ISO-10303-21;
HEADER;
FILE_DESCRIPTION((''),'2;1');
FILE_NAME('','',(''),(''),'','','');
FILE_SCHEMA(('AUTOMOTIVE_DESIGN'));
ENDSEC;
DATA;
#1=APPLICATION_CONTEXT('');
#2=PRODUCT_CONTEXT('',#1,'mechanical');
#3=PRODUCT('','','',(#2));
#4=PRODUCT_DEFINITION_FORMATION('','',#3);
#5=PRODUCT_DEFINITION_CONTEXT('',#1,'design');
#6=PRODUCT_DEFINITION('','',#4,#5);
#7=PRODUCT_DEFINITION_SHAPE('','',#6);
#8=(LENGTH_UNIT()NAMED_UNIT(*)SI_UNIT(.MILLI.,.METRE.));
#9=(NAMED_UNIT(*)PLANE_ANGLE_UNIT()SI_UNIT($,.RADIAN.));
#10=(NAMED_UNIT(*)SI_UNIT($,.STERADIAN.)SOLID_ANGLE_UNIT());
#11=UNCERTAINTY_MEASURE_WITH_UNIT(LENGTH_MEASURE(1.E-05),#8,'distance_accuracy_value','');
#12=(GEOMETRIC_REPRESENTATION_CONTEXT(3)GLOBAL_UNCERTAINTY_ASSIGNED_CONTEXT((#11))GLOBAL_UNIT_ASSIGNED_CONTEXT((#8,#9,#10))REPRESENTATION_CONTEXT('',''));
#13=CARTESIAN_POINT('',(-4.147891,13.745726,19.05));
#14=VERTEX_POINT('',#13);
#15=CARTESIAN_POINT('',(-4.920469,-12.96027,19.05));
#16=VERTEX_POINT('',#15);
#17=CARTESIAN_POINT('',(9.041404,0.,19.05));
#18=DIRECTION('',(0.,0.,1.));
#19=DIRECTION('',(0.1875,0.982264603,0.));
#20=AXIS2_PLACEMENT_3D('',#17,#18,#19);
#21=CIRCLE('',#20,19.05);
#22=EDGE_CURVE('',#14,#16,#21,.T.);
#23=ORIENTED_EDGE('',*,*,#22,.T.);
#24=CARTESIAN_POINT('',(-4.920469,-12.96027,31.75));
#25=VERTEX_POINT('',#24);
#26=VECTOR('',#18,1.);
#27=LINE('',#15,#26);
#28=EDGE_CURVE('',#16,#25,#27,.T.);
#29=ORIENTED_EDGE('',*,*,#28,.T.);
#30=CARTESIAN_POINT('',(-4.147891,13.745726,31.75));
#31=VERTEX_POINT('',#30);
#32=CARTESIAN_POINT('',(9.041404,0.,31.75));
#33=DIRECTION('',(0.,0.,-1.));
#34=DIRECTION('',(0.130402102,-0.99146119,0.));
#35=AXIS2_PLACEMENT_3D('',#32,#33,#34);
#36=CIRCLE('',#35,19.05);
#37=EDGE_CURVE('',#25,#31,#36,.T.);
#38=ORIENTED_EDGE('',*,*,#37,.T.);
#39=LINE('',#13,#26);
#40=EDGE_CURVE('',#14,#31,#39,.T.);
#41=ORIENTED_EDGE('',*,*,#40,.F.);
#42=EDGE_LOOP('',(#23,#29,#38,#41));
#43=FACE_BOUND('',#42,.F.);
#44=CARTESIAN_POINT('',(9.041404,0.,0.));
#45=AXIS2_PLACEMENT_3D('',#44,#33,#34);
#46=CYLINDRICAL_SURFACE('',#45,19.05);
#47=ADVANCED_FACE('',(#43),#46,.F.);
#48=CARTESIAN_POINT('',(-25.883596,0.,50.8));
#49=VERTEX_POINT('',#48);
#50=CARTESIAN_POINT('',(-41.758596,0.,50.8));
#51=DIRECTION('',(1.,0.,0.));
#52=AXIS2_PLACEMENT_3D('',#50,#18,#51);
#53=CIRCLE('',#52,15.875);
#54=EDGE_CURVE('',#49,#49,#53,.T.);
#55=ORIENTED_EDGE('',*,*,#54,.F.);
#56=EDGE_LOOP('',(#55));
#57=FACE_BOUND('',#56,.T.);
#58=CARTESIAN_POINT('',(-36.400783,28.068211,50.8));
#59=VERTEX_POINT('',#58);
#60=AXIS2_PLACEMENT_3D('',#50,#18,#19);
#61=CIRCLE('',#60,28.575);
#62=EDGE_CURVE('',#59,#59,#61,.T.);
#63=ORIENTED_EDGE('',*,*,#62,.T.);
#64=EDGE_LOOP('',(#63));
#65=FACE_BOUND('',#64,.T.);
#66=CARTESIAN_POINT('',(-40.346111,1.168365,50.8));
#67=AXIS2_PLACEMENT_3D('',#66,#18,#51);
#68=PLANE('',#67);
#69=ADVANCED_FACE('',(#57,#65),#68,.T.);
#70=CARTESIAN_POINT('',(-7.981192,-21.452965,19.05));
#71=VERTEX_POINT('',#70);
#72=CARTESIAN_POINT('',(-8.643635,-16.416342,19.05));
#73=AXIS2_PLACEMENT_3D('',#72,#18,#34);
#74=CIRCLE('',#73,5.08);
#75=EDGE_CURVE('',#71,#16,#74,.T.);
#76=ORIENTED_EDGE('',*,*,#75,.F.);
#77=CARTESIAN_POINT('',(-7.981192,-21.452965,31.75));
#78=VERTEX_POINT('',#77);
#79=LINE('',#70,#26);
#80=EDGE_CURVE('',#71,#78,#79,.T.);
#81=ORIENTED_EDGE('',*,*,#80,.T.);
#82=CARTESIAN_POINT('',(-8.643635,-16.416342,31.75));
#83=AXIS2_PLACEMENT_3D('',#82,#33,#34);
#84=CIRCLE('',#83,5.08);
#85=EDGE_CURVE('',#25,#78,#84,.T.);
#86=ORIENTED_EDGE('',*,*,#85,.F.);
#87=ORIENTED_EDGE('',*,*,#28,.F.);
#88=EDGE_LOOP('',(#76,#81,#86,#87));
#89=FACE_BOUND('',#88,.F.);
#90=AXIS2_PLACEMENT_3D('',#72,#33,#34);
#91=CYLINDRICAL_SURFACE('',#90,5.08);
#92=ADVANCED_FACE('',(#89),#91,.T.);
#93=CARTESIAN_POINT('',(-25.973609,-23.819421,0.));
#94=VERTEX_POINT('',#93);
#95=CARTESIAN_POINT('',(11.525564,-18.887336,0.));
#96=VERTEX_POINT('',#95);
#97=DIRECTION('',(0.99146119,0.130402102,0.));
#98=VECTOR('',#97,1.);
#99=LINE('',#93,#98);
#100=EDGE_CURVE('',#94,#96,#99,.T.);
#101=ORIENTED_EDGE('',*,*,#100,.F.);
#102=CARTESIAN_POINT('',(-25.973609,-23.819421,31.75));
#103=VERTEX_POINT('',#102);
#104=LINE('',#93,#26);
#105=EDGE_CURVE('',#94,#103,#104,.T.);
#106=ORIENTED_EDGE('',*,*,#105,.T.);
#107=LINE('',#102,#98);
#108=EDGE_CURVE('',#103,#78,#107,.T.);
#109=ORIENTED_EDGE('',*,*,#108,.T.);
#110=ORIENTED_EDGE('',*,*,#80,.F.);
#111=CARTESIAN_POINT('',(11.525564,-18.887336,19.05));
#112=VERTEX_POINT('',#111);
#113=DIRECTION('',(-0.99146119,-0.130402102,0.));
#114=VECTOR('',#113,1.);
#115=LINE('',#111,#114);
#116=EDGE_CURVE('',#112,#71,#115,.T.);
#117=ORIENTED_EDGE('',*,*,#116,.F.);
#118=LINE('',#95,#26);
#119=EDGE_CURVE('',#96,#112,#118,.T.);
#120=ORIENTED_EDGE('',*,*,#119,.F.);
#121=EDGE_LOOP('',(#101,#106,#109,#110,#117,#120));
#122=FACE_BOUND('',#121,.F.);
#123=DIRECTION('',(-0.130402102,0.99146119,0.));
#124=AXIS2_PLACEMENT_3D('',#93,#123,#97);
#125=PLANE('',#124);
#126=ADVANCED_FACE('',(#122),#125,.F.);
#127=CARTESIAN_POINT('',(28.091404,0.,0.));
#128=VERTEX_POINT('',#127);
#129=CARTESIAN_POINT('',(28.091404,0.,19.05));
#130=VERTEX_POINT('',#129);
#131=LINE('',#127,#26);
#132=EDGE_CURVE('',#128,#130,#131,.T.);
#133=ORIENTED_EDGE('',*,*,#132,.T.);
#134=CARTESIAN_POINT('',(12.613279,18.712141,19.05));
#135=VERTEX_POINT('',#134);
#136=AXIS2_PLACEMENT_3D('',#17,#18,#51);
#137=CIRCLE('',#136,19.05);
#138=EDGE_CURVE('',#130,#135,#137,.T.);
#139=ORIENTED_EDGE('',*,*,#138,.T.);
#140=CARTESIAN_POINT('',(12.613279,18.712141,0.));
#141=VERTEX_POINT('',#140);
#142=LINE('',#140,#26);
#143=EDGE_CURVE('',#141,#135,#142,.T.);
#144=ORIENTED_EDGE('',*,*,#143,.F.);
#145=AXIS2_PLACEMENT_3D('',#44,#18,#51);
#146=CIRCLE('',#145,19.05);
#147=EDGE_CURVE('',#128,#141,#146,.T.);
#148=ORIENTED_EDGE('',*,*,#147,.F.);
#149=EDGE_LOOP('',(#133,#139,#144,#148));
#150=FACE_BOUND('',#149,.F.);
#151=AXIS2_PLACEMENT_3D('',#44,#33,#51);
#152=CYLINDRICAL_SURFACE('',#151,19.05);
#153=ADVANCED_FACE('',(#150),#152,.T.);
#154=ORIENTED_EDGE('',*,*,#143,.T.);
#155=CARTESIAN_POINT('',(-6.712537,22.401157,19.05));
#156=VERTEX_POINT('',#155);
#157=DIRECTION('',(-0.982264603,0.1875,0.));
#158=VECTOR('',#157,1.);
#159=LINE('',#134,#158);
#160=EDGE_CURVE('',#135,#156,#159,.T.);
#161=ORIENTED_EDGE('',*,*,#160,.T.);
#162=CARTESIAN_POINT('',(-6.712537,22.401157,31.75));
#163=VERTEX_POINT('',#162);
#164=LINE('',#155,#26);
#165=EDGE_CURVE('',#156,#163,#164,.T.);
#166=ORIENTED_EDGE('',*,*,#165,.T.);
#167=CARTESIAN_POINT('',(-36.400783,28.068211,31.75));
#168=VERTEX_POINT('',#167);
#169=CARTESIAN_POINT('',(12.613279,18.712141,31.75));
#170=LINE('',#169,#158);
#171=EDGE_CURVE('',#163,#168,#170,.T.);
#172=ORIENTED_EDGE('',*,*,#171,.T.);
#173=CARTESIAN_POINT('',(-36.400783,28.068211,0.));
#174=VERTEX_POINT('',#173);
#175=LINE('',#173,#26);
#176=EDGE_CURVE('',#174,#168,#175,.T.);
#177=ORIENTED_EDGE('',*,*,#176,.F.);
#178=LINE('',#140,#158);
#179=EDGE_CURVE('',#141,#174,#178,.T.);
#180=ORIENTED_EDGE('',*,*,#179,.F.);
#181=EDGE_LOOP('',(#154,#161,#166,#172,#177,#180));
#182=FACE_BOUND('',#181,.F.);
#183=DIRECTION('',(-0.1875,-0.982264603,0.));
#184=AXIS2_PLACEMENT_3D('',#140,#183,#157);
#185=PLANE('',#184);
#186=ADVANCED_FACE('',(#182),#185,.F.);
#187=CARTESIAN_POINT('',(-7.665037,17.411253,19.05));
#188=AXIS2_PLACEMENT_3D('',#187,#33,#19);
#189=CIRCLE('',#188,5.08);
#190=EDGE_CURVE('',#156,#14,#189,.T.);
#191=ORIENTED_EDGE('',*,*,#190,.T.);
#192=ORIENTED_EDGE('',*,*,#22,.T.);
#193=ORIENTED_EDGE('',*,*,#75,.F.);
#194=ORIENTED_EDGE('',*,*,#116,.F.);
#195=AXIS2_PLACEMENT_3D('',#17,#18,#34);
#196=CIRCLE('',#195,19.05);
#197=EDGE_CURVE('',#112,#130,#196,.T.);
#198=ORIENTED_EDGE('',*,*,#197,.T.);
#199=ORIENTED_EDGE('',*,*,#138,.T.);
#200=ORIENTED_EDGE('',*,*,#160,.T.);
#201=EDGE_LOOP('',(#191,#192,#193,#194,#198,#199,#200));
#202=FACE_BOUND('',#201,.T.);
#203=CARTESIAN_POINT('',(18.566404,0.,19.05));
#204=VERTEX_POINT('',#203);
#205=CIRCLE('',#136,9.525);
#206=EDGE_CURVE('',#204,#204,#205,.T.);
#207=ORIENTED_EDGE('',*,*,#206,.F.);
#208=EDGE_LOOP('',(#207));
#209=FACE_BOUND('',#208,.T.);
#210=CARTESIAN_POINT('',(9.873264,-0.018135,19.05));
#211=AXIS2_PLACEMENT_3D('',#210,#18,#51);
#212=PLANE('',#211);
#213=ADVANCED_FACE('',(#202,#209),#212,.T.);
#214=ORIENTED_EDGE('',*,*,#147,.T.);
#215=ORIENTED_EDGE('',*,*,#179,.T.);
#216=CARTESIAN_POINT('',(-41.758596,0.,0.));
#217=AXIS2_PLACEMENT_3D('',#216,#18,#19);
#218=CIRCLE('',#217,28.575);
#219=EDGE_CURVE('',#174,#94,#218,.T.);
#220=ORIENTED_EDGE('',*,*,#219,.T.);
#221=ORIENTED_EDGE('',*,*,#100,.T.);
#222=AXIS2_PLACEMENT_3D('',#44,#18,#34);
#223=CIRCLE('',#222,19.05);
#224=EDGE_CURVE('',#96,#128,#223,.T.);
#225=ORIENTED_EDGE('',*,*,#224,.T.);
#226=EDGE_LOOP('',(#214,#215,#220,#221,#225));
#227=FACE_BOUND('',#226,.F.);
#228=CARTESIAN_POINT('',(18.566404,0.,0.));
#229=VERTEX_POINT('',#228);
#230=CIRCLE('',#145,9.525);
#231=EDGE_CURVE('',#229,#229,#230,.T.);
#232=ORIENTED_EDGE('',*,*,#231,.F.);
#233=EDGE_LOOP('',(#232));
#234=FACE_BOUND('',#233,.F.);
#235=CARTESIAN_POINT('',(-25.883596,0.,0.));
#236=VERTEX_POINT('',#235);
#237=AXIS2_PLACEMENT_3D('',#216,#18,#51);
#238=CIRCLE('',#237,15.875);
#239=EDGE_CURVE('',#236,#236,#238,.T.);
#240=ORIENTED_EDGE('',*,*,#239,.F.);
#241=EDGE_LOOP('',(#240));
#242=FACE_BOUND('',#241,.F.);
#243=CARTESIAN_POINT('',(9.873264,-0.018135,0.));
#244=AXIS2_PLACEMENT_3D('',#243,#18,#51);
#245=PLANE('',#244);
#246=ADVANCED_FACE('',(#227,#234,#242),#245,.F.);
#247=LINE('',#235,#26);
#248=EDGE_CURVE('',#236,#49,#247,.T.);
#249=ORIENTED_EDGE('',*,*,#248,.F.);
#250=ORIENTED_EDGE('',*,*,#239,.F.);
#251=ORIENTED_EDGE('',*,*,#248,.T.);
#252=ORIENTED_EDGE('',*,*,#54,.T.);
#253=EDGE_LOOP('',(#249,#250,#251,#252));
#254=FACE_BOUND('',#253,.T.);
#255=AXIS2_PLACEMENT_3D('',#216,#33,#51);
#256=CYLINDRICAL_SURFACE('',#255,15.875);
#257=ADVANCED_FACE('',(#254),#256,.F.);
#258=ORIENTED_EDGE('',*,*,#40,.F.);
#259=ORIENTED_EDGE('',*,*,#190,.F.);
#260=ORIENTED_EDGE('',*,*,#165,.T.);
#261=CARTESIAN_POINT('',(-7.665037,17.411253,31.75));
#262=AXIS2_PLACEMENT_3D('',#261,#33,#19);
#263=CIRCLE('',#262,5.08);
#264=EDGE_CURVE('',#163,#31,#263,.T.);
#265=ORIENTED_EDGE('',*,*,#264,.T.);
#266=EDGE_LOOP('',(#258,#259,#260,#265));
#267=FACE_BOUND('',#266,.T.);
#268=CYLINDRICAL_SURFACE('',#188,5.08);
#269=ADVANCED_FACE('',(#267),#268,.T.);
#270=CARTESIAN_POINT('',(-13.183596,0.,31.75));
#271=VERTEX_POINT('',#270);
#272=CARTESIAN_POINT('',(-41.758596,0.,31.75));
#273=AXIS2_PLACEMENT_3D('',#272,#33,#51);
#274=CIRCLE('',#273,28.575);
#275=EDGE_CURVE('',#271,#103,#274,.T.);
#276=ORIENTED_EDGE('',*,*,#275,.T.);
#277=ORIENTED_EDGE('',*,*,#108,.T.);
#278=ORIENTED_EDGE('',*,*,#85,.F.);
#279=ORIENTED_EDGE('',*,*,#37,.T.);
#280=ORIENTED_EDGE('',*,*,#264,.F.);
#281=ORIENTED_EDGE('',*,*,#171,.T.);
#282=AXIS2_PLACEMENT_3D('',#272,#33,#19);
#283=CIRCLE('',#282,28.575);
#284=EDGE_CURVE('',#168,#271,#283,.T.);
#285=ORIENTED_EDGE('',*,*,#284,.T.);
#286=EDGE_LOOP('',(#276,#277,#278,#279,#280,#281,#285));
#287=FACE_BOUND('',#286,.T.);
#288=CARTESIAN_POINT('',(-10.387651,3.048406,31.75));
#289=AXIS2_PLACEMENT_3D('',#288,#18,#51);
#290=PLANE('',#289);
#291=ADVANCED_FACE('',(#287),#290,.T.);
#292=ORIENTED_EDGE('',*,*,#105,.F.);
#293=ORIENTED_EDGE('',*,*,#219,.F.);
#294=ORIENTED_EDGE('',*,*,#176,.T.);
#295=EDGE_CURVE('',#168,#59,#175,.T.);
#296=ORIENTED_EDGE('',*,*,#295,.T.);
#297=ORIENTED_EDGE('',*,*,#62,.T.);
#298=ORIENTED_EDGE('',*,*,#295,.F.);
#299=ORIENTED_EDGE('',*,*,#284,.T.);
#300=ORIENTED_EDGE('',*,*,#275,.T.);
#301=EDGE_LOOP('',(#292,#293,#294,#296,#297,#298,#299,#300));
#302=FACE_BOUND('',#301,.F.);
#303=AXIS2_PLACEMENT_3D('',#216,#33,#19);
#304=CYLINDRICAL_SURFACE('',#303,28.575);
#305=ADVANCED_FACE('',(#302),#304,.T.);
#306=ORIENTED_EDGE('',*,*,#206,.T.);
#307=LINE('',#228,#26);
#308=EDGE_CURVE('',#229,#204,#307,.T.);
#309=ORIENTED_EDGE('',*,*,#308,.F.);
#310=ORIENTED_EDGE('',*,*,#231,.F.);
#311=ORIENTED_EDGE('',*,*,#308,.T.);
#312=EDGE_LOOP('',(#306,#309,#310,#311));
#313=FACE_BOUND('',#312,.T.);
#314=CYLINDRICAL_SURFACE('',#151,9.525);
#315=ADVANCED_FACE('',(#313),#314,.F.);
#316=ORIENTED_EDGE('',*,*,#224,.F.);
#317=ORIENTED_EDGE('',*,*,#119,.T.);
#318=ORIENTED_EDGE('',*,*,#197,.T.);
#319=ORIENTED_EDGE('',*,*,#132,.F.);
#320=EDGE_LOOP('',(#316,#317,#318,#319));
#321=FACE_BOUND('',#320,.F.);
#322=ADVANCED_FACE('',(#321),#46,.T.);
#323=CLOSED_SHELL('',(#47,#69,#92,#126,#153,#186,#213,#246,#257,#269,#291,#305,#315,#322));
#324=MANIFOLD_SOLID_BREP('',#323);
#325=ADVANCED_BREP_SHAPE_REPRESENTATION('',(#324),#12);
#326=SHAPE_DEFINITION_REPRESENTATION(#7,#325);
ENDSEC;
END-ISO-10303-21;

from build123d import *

# Parameters (mm, degrees)
F0_R        = 15.875
F1_DEPTH    = 50.8
F2_DEPTH    = 31.75
F0_R_2      = 9.525
F3_DEPTH    = 19.05
F4_T1_DEPTH = 61.8868884968


# Not quite as in the source:
# - a fillet or chamfer that OpenCascade refuses, or shapes differently, is made with other operations: its cross-section is extruded or revolved along the edge and cut away or added


with BuildPart() as f1:
    # F0 (on Top) → F1 (new body)
    with BuildSketch(Plane.XY):
        with BuildLine():
            ThreePointArc((-25.9736086209, -23.8194207925), (-16.5833436809, -13.5180364382), (-13.1835957324, 0))
            ThreePointArc((-13.1835957324, 0), (-19.7400794655, 18.2130603251), (-36.4007832324, 28.0682110263))
            ThreePointArc((-36.4007832324, 28.0682110263), (-69.7735217146, -5.6297910447), (-25.9736086209, -23.8194207925))
        make_face()
        with Locations((-41.7585957324, 0)):
            Circle(F0_R, mode=Mode.SUBTRACT)
    extrude(amount=F1_DEPTH)

    # F0 (on Top) → F2 (join)
    with BuildSketch(Plane.XY):
        with BuildLine():
            ThreePointArc((-36.4007832324, 28.0682110263), (-19.7400794655, 18.2130603251), (-13.1835957324, 0))
            ThreePointArc((-13.1835957324, 0), (-16.5833436809, -13.5180364382), (-25.9736086209, -23.8194207925))
            Line((-25.9736086209, -23.8194207925), (11.5255643148, -18.8873356739))
            ThreePointArc((11.5255643148, -18.8873356739), (-10.0006293875, 0.5508668403), (12.6132792676, 18.7121406842))
            Line((12.6132792676, 18.7121406842), (-36.4007832324, 28.0682110263))
        make_face()
    extrude(amount=F2_DEPTH)

    # F0 (on Top) → F3 (join)
    with BuildSketch(Plane.XY):
        with BuildLine():
            ThreePointArc((28.0914042676, 0), (23.7204151122, 12.1420402167), (12.6132792676, 18.7121406842))
            ThreePointArc((12.6132792676, 18.7121406842), (-10.0006293875, 0.5508668403), (11.5255643148, -18.8873356739))
            ThreePointArc((11.5255643148, -18.8873356739), (23.3631665352, -12.5614340563), (28.0914042676, 0))
        make_face()
        with Locations((9.0414042676, 0)):
            Circle(F0_R_2, mode=Mode.SUBTRACT)
    extrude(amount=F3_DEPTH)

    # F4: fillet of radius 5.08 on 2 edges, made by hand

    # F4_s2 → F4_t1 (cut)
    with BuildSketch(Plane.XY.offset(19.05)):
        with BuildLine():
            ThreePointArc((-6.7125365301, 22.4011573214), (-2.7943533432, 18.8544597398), (-4.147891099, 13.7457261624))
            ThreePointArc((-4.147891099, 13.7457261624), (3.6293795146, 18.265061951), (12.6132792676, 18.7121406842))
            Line((12.6132792676, 18.7121406842), (-6.7125365301, 22.4011573214))
        make_face()
        with BuildLine():
            ThreePointArc((-7.9811920904, -21.4529651384), (-3.8645283867, -18.1387075787), (-4.9204686565, -12.9602702306))
            ThreePointArc((-4.9204686565, -12.9602702306), (2.5825344428, -17.921648936), (11.5255643148, -18.8873356739))
            Line((11.5255643148, -18.8873356739), (-7.9811920904, -21.4529651384))
        make_face()
    extrude(amount=F4_T1_DEPTH, mode=Mode.SUBTRACT)


solid = f1.part
